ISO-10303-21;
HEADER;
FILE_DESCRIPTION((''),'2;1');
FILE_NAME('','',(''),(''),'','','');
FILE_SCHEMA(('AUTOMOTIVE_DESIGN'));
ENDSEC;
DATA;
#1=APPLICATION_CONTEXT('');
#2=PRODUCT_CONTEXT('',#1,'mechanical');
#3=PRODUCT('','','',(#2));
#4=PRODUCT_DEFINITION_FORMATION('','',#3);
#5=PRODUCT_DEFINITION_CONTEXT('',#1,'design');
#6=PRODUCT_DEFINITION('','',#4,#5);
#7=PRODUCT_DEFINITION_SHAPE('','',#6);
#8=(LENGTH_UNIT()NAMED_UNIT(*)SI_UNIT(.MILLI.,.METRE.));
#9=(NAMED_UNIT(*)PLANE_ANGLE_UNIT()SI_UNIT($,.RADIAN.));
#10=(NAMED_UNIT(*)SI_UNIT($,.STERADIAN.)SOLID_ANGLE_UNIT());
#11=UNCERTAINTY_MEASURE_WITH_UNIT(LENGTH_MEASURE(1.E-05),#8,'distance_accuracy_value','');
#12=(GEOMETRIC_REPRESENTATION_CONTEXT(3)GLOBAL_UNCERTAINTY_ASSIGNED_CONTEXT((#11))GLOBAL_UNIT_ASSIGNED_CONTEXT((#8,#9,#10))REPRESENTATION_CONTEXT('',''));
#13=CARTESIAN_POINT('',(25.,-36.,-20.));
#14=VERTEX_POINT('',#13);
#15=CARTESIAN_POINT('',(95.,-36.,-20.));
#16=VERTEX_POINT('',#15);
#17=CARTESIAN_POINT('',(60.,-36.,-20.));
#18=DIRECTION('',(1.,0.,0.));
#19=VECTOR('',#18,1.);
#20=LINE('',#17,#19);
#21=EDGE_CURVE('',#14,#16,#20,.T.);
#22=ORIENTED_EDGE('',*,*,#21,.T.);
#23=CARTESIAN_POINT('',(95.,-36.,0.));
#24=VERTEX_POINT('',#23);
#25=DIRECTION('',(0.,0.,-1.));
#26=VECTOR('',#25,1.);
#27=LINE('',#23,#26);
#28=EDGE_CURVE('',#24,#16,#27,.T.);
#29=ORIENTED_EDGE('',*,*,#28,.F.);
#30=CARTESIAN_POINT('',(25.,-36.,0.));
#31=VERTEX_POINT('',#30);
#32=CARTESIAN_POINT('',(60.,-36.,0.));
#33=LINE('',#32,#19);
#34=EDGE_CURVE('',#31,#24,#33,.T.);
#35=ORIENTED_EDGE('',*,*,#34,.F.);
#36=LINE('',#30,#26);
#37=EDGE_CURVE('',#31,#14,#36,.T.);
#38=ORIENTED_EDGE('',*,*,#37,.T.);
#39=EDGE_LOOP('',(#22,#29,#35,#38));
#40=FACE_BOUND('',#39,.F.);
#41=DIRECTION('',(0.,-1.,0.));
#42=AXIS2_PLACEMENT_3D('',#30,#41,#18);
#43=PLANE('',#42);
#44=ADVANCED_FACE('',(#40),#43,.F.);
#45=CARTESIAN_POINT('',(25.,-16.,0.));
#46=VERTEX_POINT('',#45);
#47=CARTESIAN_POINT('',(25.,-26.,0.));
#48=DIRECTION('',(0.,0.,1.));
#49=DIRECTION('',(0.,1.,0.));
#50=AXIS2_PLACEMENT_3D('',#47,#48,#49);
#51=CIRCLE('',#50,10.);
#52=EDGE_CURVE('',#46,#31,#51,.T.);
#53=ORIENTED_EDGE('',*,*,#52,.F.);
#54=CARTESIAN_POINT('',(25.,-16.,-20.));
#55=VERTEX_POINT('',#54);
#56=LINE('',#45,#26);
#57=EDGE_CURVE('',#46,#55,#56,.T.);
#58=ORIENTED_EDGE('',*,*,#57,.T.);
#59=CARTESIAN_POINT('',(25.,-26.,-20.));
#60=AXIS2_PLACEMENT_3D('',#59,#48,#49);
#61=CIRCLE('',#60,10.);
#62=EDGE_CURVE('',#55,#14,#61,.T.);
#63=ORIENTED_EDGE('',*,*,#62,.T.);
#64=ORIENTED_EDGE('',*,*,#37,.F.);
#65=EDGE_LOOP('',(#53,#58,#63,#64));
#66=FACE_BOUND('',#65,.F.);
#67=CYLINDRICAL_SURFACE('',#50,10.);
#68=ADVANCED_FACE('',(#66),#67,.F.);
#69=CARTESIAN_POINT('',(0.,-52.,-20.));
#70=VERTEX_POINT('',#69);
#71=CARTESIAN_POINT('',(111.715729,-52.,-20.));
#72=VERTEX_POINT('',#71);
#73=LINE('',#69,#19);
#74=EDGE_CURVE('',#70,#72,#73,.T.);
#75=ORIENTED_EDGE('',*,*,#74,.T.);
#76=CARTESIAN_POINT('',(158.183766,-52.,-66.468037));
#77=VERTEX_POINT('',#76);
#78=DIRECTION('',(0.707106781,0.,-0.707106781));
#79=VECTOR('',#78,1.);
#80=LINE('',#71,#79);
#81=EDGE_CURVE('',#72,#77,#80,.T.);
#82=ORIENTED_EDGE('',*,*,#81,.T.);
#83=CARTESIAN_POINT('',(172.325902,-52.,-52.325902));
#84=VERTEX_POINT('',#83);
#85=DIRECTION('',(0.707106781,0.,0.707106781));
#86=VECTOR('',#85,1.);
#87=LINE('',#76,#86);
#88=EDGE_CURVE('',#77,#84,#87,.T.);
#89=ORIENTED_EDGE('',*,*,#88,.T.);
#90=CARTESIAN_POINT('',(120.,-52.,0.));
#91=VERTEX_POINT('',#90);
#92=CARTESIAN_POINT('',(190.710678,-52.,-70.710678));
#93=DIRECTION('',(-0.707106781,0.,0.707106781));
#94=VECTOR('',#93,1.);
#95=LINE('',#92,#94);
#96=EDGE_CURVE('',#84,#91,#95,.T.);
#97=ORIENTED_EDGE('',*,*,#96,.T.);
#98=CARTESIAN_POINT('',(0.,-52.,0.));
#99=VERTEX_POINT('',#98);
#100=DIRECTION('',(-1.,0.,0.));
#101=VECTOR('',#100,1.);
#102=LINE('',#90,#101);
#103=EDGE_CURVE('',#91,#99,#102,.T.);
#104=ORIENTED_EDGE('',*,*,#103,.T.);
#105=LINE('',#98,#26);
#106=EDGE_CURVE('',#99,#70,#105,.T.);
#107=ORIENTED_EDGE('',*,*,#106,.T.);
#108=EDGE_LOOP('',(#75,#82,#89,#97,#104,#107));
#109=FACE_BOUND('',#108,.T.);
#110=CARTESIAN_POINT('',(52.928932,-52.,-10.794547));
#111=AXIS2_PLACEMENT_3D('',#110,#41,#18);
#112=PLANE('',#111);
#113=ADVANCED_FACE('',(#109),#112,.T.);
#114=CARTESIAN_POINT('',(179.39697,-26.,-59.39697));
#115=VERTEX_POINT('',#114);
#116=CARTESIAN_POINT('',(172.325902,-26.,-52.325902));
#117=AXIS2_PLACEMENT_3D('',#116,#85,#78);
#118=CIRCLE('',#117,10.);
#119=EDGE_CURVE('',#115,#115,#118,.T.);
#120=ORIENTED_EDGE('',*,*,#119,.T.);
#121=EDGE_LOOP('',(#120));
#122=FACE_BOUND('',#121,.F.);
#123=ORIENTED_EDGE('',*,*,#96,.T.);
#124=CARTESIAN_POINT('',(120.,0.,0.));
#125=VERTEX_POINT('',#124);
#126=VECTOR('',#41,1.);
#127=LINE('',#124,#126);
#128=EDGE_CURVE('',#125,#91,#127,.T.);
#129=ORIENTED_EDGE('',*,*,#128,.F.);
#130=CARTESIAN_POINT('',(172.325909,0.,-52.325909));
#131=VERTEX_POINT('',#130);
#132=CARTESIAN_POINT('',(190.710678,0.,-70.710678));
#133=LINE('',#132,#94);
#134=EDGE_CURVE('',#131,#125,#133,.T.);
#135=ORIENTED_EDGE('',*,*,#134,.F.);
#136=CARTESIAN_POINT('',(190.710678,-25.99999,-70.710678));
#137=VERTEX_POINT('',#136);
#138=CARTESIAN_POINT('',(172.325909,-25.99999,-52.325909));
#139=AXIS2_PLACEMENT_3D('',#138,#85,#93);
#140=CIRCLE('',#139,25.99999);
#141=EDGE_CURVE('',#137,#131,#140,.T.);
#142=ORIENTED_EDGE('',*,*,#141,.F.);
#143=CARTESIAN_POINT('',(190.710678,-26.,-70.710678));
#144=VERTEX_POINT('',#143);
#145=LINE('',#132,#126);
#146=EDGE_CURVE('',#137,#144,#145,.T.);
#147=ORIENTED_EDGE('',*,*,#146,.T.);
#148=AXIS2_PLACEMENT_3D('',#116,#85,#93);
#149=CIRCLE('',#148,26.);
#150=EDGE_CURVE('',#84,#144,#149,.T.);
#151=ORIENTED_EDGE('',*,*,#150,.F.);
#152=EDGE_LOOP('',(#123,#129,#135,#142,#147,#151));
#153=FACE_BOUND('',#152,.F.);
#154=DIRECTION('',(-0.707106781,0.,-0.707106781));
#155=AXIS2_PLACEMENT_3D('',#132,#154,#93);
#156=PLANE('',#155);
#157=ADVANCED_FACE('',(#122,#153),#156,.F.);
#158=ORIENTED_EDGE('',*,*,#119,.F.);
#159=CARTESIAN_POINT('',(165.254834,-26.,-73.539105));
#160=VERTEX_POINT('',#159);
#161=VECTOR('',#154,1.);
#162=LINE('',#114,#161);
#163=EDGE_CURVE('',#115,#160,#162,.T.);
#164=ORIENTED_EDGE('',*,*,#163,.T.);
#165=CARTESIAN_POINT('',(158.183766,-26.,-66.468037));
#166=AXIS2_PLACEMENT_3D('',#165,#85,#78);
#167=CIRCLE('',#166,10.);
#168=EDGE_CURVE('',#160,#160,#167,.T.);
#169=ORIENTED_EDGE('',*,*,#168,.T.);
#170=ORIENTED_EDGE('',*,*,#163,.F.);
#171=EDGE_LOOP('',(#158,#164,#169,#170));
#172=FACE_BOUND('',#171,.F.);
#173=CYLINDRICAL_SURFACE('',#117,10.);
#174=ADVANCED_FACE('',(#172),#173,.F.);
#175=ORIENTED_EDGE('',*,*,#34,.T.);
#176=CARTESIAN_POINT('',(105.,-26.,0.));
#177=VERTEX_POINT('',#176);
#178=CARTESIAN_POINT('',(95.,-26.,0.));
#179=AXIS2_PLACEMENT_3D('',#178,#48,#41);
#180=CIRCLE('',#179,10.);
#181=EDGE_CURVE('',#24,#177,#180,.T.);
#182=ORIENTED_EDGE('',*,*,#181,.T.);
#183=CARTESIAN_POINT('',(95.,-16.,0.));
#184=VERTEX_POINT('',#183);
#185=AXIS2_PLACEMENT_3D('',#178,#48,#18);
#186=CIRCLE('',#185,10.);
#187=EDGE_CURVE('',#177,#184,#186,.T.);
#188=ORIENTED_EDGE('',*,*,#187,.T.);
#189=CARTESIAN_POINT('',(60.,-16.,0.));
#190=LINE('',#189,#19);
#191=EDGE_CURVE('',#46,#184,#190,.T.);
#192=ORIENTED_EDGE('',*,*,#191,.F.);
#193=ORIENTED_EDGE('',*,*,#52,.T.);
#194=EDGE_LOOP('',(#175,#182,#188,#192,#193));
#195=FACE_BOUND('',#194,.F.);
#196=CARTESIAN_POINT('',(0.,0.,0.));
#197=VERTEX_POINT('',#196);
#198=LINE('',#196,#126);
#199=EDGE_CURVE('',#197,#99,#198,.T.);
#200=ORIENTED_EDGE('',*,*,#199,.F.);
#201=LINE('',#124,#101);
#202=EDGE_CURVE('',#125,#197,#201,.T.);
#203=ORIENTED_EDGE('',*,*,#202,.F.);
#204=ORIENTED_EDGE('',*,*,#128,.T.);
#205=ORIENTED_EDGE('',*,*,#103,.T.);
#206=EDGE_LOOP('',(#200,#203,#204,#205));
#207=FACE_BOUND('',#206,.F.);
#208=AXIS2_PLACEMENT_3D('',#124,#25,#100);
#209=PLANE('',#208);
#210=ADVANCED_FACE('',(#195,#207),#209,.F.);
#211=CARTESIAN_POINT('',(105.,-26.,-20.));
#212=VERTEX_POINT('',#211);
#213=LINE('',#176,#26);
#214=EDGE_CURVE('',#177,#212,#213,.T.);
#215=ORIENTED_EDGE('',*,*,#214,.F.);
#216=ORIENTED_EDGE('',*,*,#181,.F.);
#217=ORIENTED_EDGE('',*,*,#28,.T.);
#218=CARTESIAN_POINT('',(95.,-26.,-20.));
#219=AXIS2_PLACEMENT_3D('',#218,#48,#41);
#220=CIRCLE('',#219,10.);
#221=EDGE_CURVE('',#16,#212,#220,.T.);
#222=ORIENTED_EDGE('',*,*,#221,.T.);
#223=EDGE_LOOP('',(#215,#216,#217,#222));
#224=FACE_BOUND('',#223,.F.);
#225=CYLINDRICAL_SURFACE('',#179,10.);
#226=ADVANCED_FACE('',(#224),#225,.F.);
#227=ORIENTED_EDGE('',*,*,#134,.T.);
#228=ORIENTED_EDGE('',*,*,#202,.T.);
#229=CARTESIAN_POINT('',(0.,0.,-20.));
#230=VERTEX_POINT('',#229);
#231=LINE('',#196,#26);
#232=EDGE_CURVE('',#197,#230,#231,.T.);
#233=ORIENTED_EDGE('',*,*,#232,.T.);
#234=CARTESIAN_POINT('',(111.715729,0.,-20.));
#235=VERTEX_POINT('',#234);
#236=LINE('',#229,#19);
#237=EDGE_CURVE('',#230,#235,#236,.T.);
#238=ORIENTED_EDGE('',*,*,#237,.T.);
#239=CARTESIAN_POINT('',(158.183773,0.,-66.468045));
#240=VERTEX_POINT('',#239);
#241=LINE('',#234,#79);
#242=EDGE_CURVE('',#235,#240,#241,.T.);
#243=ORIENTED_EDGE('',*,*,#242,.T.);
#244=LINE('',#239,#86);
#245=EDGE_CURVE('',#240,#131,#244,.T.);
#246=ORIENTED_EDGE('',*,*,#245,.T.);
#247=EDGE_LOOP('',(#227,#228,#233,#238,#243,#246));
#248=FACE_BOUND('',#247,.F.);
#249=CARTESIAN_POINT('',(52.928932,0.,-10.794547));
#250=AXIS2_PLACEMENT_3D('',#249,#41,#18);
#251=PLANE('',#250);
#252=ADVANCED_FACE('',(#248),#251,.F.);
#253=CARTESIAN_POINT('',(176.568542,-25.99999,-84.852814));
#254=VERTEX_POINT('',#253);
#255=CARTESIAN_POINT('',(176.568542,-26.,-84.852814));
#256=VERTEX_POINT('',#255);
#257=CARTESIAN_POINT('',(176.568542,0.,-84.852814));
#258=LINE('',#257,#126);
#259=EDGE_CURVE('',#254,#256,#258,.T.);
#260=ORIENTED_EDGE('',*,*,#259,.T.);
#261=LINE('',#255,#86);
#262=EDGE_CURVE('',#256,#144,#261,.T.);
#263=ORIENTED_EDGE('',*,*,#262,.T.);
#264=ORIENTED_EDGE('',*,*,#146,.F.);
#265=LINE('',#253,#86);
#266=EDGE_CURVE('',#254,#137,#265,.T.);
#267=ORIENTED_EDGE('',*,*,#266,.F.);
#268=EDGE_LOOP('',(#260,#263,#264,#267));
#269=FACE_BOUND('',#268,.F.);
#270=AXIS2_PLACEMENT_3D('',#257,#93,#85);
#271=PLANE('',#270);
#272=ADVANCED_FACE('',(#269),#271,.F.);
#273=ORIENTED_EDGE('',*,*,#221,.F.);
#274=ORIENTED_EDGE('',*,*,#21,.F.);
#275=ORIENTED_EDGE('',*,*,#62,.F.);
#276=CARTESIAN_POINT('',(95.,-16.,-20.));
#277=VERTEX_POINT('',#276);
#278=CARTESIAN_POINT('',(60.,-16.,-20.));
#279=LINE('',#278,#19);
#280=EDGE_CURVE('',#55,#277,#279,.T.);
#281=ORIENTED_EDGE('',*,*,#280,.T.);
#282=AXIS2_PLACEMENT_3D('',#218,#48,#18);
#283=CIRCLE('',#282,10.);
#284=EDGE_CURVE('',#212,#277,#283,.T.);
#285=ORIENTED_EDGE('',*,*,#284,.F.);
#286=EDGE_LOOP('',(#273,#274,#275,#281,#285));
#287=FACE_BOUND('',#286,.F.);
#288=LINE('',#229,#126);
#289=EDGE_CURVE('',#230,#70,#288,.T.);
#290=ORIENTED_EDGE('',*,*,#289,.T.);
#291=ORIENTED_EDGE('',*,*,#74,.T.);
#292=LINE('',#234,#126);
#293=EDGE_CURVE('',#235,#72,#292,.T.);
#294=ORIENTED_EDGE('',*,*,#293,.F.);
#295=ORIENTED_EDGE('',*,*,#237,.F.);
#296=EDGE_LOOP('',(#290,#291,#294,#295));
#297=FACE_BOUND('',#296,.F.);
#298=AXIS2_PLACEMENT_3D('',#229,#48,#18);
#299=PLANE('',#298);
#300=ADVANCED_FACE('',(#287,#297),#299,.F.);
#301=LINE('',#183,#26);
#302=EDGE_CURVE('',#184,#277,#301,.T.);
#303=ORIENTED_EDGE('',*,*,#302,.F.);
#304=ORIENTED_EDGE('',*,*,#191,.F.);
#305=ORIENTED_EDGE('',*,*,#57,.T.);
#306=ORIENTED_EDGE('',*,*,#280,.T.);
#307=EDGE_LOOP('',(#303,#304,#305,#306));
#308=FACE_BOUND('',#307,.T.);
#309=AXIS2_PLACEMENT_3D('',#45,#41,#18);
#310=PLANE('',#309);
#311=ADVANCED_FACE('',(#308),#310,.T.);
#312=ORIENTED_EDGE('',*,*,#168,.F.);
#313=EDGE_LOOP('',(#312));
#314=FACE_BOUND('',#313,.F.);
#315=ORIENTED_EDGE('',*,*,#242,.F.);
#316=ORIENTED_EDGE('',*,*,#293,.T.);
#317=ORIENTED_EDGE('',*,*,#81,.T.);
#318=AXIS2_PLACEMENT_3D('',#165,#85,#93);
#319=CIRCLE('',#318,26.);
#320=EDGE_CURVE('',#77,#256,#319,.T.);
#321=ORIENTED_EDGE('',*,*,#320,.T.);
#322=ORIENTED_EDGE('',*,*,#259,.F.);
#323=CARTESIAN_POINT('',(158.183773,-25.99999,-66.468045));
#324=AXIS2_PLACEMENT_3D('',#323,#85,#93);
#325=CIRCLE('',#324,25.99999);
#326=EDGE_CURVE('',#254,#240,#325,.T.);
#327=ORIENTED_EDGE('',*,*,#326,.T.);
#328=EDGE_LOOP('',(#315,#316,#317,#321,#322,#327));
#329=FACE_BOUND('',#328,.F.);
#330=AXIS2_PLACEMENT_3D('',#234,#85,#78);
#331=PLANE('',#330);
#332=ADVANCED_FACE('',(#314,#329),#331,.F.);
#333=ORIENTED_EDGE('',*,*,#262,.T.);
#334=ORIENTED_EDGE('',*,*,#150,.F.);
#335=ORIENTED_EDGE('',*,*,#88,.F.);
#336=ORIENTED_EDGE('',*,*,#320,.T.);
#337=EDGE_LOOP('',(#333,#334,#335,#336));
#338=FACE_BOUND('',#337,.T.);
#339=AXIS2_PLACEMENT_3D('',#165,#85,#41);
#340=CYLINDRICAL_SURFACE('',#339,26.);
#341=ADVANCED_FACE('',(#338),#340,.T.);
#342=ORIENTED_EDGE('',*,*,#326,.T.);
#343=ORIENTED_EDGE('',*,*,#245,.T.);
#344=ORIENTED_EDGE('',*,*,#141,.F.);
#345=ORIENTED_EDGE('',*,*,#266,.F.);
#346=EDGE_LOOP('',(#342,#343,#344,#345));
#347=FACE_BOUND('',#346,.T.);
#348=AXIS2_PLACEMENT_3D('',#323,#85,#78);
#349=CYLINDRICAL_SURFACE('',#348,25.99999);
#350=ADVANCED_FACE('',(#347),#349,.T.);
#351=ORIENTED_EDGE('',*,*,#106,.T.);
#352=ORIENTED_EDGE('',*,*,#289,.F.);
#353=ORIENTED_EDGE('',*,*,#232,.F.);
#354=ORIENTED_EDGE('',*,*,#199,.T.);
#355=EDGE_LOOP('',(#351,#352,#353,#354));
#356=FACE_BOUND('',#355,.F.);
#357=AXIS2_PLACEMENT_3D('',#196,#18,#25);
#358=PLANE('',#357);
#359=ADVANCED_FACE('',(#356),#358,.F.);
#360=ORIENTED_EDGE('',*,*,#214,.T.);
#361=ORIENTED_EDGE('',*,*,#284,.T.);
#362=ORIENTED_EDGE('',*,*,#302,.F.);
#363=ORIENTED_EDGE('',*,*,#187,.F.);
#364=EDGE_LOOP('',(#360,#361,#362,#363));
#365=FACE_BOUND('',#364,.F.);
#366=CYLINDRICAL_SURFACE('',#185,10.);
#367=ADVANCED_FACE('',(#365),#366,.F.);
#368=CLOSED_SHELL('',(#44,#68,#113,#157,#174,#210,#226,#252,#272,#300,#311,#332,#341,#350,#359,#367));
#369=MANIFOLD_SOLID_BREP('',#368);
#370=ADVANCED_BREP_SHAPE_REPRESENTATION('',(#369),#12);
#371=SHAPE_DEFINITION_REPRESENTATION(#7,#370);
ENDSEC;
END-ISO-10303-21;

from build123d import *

# Parameters (mm, degrees)
F1_DEPTH = 52
F2_W     = 70
F2_H     = 20
F5_DEPTH = 20
F6_R     = 10
F7_DEPTH = 20
F8_R     = 26
F9_R     = 25.99999


# Not quite as in the source:
# - a fillet or chamfer is up to 0.001 mm smaller than in the source, because OpenCascade refuses the exact size


with BuildPart() as f1:
    # F0 (on Front) → F1 (new body)
    with BuildSketch(Plane.XZ):
        Polygon((91.7157287525, 0), (0, 0), (0, -20), (111.7157287525, -20), align=None)
        Polygon((190.7106781187, -70.7106781187), (120, 0), (120, -20), (111.7157287525, -20), (176.5685424949, -84.8528137424), align=None)
        Polygon((120, 0), (91.7157287525, 0), (111.7157287525, -20), (120, -20), align=None)
    extrude(amount=F1_DEPTH)

    # F2 (on face) + F4 (on face) + F3 (on face) → F5 (cut)
    with BuildSketch(Plane.XY):
        with Locations((60, -26)):
            Rectangle(F2_W, F2_H)
    with BuildSketch(Plane.XY):
        with BuildLine():
            ThreePointArc((95, -36), (102.0710678119, -33.0710678119), (105, -26))
            ThreePointArc((105, -26), (102.0710678119, -18.9289321881), (95, -16))
            Line((95, -16), (95, -36))
        make_face()
    with BuildSketch(Plane.XY):
        with BuildLine():
            Line((25, -36), (25, -16))
            ThreePointArc((25, -16), (15, -26), (25, -36))
        make_face()
    extrude(amount=-F5_DEPTH, mode=Mode.SUBTRACT)

    # F6 (on face) → F7 (cut)
    with BuildSketch(Plane(origin=(60, 0, 60), x_dir=(0.7071067812, 0, -0.7071067812), z_dir=(0.7071067812, 0, 0.7071067812))):
        with Locations((158.8528137424, -26)):
            Circle(F6_R)
    extrude(amount=-F7_DEPTH, mode=Mode.SUBTRACT)

    # F8
    f8_edges = [f1.edges().sort_by_distance(p)[0] for p in [
        (183.63961, -52, -77.781746),
    ]]
    fillet(f8_edges, radius=F8_R)

    # F9 (radius 26 in the source; OpenCascade refuses exactly that, so slightly less here)
    f9_edges = [f1.edges().sort_by_distance(p)[0] for p in [
        (183.63961, 0, -77.781746),
    ]]
    fillet(f9_edges, radius=F9_R)


solid = f1.part
